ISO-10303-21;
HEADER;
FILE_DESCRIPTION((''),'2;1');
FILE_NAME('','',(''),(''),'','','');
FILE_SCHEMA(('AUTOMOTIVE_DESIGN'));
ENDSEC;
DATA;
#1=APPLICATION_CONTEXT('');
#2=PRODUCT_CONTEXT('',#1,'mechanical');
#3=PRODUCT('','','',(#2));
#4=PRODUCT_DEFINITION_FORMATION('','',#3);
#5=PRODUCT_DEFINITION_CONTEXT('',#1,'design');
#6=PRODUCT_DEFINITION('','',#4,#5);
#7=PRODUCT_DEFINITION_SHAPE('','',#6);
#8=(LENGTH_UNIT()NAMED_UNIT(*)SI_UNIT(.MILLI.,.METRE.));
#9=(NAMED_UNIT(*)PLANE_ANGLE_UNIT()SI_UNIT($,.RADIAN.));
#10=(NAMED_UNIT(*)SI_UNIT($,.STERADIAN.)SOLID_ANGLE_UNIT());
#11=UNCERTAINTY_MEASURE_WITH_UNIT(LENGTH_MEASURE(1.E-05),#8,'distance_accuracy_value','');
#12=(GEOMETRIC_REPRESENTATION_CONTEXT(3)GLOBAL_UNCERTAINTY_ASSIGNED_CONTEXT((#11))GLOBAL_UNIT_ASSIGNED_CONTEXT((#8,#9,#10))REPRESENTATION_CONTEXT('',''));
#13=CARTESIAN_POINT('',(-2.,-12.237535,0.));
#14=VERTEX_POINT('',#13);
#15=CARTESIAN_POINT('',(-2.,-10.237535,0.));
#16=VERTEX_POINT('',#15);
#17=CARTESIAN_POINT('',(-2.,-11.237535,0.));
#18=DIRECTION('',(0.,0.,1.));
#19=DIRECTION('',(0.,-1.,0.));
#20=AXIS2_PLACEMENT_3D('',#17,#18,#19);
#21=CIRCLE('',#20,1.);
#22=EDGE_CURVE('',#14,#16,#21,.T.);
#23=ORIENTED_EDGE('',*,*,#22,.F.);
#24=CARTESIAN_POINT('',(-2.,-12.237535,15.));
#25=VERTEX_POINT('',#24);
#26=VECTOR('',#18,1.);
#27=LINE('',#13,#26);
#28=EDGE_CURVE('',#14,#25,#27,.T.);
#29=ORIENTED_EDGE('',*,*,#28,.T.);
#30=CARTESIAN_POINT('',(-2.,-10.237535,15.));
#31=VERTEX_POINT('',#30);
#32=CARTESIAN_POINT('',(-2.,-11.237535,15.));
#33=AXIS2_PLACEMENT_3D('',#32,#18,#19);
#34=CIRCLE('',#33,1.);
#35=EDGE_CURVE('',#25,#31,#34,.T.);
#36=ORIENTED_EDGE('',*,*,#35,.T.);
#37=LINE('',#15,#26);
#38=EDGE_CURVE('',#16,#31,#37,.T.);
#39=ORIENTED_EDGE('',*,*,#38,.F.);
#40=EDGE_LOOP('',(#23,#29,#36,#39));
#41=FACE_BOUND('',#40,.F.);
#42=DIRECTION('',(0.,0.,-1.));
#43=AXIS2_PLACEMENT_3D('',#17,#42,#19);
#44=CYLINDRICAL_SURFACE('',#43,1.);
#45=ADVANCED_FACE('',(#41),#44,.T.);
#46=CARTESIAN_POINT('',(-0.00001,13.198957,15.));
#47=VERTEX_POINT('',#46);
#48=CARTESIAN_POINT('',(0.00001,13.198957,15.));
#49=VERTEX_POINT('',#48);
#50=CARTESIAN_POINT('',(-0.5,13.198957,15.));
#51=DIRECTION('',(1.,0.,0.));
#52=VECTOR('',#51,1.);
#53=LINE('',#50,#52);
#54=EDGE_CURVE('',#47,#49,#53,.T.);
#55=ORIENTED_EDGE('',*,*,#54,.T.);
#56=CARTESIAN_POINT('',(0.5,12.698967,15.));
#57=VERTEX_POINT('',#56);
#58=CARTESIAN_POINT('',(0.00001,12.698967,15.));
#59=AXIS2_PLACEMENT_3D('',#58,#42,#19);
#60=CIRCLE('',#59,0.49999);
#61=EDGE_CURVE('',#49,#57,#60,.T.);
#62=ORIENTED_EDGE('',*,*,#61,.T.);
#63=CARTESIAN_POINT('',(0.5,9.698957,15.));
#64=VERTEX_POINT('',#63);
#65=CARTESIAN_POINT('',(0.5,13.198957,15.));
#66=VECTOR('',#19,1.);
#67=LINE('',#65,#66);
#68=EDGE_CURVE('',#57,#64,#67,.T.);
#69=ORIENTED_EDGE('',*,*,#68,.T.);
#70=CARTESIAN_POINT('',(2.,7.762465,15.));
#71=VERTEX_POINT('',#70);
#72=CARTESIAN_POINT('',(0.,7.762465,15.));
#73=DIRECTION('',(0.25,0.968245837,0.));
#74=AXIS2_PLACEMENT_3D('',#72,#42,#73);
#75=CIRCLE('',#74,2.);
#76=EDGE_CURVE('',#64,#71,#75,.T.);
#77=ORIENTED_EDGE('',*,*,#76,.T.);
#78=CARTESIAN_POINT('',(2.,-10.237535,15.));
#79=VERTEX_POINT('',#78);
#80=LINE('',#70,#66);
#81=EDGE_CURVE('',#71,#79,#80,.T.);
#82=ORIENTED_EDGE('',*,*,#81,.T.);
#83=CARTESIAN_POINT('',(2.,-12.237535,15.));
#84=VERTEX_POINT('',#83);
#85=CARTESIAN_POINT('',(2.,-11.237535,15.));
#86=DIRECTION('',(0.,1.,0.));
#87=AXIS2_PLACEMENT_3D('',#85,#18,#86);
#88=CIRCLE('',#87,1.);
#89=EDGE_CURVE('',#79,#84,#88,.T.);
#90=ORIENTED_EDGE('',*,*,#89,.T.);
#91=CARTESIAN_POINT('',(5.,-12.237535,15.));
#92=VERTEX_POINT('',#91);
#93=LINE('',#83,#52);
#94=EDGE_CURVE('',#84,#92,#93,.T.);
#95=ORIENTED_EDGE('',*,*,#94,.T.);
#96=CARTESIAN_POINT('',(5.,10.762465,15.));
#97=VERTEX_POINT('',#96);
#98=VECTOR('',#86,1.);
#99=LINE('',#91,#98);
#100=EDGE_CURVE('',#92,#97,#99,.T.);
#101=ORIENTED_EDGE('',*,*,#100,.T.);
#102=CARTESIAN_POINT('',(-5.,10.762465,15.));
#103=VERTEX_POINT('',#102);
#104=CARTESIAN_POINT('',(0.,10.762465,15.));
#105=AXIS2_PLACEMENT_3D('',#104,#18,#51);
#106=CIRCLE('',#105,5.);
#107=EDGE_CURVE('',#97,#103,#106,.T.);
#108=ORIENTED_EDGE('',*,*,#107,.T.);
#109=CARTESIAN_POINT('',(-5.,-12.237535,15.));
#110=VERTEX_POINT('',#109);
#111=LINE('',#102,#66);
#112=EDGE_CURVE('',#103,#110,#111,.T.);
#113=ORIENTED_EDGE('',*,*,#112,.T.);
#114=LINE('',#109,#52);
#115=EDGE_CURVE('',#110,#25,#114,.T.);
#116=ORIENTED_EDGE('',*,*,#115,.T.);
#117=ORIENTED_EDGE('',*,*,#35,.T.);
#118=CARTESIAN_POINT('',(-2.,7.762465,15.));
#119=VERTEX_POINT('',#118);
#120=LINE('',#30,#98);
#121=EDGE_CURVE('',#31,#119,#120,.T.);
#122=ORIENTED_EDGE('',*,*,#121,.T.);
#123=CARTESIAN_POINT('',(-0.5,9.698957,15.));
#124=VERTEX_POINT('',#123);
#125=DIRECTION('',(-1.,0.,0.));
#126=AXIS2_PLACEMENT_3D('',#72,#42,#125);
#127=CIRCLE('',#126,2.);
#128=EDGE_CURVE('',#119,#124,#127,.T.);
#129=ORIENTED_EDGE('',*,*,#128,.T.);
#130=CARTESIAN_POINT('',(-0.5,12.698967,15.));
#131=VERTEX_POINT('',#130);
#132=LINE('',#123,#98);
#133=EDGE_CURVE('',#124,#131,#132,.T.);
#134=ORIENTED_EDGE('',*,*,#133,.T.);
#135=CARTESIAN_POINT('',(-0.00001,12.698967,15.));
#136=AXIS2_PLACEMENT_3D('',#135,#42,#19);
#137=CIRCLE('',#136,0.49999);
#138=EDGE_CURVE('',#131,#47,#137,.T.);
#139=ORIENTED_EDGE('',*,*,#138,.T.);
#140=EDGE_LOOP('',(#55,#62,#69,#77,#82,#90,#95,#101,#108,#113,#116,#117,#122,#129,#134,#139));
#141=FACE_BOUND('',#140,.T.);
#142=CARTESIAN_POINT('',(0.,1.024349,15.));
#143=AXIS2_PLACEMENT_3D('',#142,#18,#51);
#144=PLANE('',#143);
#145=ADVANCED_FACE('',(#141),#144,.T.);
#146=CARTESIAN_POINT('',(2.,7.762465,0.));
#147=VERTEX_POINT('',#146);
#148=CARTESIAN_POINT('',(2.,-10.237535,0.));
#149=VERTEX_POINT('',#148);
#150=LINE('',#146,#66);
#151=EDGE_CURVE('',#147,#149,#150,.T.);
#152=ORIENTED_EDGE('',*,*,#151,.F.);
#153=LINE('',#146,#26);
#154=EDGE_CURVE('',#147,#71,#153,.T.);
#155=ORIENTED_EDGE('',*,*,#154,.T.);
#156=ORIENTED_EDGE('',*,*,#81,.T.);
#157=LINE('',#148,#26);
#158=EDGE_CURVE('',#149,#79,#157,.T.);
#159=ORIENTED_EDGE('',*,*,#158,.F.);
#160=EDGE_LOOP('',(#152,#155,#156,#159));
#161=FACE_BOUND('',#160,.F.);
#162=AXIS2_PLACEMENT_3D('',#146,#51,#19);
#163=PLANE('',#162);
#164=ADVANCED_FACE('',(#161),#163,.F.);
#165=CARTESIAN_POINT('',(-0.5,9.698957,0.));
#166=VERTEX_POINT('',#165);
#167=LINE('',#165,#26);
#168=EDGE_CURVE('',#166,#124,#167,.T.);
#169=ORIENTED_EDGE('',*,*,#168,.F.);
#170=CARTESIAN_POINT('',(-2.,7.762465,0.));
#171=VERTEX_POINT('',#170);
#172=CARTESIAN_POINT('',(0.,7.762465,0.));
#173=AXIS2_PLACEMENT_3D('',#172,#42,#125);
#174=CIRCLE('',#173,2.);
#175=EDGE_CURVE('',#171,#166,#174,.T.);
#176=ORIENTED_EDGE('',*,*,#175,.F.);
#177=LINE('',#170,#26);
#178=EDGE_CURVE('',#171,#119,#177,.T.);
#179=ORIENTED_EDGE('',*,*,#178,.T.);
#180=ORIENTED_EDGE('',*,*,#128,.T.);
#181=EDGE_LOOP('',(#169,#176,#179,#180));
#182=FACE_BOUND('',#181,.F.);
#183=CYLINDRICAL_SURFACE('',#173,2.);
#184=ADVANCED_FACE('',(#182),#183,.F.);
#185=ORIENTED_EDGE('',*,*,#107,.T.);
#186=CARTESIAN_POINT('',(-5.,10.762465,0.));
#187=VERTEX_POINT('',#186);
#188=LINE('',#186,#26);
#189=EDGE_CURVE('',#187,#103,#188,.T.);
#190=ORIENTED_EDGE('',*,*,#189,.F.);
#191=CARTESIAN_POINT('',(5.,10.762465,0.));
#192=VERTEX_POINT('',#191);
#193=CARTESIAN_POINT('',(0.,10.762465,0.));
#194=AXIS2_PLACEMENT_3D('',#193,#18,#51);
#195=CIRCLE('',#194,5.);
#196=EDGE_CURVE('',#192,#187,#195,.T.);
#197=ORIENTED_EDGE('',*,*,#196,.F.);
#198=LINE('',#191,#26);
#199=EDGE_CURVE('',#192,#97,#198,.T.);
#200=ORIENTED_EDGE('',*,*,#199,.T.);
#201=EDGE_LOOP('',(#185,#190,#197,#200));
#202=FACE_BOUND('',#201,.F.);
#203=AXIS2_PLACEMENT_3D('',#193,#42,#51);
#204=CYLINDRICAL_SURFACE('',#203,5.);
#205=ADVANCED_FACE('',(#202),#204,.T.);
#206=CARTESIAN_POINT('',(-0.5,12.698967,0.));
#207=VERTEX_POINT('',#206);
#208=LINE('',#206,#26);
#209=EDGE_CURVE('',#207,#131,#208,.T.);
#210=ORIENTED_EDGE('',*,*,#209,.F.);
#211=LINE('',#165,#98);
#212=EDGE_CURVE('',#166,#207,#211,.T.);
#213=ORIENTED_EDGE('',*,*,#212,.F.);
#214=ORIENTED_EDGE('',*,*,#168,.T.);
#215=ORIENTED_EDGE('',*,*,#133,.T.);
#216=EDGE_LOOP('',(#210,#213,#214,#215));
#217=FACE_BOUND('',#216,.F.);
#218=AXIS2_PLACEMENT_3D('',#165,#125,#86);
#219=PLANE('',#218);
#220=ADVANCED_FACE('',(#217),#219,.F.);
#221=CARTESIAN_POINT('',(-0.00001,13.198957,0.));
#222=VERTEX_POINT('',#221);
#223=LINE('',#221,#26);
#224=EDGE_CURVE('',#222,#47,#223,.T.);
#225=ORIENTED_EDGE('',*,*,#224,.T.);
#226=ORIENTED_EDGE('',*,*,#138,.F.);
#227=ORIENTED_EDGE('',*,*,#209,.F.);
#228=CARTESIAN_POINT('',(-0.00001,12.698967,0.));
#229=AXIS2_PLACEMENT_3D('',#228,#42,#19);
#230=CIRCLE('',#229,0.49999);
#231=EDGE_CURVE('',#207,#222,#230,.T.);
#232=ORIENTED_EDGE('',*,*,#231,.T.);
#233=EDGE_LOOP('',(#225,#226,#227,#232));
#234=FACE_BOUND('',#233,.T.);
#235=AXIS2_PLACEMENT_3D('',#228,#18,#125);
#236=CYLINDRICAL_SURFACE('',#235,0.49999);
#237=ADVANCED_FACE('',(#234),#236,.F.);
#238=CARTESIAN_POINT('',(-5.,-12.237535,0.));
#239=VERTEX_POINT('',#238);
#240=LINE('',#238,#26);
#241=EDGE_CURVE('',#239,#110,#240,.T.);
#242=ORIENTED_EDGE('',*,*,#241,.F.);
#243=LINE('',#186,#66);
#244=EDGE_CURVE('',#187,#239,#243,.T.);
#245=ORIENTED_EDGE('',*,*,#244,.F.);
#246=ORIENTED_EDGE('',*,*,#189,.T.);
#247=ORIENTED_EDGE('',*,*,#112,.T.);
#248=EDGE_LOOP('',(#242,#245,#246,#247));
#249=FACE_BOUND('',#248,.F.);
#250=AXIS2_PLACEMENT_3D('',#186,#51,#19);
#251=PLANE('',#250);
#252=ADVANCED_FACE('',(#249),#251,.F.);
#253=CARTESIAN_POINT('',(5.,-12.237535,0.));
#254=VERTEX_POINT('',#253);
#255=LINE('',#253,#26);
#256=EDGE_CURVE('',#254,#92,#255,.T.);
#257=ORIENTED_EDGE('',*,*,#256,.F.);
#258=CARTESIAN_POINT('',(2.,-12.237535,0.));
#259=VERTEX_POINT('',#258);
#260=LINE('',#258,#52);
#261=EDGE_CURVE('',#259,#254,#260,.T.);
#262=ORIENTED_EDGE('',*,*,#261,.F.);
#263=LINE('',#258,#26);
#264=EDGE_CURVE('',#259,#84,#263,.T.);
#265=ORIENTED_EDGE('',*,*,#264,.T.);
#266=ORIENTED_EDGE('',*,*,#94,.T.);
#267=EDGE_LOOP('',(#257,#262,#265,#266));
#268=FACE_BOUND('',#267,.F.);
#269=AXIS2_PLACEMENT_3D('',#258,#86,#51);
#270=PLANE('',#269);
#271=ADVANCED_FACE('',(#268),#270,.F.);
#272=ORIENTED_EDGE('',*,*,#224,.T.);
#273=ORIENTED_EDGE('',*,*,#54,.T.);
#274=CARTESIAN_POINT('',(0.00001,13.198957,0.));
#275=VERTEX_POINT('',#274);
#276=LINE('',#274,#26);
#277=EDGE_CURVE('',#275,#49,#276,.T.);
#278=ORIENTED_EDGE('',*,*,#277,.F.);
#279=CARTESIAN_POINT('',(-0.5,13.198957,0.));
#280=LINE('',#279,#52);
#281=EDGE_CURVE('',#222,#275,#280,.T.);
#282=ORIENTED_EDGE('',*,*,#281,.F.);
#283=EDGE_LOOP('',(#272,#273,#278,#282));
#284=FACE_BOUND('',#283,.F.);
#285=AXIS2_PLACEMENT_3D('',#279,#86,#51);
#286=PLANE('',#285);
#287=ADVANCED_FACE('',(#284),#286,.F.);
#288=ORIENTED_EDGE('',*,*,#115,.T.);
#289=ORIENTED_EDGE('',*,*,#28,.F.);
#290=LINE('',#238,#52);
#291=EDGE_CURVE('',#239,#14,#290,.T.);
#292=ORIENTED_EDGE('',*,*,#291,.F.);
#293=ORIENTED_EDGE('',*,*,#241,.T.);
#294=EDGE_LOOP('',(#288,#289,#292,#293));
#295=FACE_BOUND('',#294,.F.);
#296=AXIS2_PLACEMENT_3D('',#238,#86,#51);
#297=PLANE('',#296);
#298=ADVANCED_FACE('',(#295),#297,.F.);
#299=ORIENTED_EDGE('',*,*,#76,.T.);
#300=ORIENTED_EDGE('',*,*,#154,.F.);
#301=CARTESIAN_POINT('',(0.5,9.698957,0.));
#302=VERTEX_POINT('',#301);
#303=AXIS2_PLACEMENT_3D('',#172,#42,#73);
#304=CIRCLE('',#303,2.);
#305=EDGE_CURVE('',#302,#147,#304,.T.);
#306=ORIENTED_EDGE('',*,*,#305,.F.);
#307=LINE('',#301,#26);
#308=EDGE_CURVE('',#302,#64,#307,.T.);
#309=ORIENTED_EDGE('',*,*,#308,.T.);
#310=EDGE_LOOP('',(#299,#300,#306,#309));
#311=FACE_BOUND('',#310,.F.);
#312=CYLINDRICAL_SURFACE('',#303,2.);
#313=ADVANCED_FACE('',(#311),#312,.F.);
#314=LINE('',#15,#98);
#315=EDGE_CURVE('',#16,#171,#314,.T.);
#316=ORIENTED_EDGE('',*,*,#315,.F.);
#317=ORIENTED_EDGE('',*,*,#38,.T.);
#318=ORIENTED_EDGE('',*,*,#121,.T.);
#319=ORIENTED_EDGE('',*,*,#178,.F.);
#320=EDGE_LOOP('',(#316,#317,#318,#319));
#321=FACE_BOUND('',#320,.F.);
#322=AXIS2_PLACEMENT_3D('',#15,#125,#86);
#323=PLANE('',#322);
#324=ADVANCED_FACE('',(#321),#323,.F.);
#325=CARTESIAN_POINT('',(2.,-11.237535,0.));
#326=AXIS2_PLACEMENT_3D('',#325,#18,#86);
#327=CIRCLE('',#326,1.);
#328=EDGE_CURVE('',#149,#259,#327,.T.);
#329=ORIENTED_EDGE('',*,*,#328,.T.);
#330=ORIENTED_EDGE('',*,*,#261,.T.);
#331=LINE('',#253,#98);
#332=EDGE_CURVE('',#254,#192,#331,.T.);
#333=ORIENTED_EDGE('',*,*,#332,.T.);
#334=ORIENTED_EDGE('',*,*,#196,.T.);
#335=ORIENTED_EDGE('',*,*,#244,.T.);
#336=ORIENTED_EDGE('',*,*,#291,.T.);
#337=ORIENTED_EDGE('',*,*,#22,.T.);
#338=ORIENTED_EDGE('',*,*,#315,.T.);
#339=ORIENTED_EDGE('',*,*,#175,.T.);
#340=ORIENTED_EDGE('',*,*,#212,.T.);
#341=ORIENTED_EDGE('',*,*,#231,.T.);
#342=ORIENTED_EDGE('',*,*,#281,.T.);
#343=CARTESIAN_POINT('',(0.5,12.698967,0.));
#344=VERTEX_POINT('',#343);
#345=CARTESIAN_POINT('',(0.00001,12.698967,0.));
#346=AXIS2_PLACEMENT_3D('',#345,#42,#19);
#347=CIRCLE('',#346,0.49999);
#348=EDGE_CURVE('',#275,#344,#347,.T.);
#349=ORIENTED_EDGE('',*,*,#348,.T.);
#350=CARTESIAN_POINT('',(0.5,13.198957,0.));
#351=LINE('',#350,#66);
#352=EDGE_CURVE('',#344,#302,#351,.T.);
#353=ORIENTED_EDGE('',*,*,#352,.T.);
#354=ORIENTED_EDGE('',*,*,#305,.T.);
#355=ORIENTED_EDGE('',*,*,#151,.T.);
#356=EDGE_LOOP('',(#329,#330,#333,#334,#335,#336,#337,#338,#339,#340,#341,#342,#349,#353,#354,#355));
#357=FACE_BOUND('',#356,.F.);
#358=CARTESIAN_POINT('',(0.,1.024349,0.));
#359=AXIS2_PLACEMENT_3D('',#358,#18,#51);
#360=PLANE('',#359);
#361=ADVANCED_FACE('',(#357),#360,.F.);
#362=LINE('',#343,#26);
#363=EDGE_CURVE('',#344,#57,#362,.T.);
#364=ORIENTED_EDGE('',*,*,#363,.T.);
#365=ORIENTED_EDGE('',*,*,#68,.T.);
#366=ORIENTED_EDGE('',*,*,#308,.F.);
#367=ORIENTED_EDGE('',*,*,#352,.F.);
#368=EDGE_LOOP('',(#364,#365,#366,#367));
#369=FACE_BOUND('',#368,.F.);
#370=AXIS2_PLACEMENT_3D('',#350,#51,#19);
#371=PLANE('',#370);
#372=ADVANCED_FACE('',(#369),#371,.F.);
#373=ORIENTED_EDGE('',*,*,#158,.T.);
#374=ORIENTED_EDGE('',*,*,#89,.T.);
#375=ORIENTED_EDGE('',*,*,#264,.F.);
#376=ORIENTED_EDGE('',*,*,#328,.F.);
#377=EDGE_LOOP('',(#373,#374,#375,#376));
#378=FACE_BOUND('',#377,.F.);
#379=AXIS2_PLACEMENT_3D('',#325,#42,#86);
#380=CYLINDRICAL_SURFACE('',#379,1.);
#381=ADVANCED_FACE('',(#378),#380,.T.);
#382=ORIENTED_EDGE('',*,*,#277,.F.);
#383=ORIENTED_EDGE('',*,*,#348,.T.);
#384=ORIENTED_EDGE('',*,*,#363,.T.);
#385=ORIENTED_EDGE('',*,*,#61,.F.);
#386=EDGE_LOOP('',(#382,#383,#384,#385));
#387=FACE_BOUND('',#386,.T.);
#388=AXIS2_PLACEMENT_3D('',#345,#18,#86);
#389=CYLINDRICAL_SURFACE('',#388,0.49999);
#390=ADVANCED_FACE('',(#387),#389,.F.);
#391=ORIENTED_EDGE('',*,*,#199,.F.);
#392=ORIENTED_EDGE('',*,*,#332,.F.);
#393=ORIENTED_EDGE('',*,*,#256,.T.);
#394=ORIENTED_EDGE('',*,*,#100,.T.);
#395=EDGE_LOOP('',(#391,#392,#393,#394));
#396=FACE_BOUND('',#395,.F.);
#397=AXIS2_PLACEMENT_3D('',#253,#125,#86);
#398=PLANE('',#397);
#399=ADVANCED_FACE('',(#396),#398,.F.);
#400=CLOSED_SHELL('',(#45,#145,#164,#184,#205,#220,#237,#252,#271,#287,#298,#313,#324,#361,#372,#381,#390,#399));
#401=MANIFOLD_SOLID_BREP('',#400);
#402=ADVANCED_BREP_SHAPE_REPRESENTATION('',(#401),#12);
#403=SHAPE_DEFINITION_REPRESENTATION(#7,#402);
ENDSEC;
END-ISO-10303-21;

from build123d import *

# Parameters (mm, degrees)
F1_DEPTH = 15
F2_R     = 0.49999


# Not quite as in the source:
# - a fillet or chamfer is up to 0.001 mm smaller than in the source, because OpenCascade refuses the exact size


with BuildPart() as f1:
    # F0 (on Top) → F1 (new body)
    with BuildSketch(Plane.XY):
        with BuildLine():
            Line((-5, -12.237534521), (-2, -12.237534521))
            ThreePointArc((-2, -12.237534521), (-1, -11.237534521), (-2, -10.237534521))
            Line((-2, -10.237534521), (-2, 7.762465479))
            ThreePointArc((-2, 7.762465479), (-1.5811388301, 8.9872103504), (-0.5, 9.6989571521))
            Line((-0.5, 9.6989571521), (-0.5, 13.1989571521))
            Line((-0.5, 13.1989571521), (0.5, 13.1989571521))
            Line((0.5, 13.1989571521), (0.5, 9.6989571521))
            ThreePointArc((0.5, 9.6989571521), (1.5811388301, 8.9872103504), (2, 7.762465479))
            Line((2, 7.762465479), (2, -10.237534521))
            ThreePointArc((2, -10.237534521), (1, -11.237534521), (2, -12.237534521))
            Line((2, -12.237534521), (5, -12.237534521))
            Line((5, -12.237534521), (5, 10.762465479))
            ThreePointArc((5, 10.762465479), (0, 15.762465479), (-5, 10.762465479))
            Line((-5, 10.762465479), (-5, -12.237534521))
        make_face()
    extrude(amount=F1_DEPTH)

    # F2 (radius 0.5 in the source; OpenCascade refuses exactly that, so slightly less here)
    f2_edges = [f1.edges().sort_by_distance(p)[0] for p in [
        (-0.5, 13.198957, 7.5),
        (0.5, 13.198957, 7.5),
    ]]
    fillet(f2_edges, radius=F2_R)


solid = f1.part
